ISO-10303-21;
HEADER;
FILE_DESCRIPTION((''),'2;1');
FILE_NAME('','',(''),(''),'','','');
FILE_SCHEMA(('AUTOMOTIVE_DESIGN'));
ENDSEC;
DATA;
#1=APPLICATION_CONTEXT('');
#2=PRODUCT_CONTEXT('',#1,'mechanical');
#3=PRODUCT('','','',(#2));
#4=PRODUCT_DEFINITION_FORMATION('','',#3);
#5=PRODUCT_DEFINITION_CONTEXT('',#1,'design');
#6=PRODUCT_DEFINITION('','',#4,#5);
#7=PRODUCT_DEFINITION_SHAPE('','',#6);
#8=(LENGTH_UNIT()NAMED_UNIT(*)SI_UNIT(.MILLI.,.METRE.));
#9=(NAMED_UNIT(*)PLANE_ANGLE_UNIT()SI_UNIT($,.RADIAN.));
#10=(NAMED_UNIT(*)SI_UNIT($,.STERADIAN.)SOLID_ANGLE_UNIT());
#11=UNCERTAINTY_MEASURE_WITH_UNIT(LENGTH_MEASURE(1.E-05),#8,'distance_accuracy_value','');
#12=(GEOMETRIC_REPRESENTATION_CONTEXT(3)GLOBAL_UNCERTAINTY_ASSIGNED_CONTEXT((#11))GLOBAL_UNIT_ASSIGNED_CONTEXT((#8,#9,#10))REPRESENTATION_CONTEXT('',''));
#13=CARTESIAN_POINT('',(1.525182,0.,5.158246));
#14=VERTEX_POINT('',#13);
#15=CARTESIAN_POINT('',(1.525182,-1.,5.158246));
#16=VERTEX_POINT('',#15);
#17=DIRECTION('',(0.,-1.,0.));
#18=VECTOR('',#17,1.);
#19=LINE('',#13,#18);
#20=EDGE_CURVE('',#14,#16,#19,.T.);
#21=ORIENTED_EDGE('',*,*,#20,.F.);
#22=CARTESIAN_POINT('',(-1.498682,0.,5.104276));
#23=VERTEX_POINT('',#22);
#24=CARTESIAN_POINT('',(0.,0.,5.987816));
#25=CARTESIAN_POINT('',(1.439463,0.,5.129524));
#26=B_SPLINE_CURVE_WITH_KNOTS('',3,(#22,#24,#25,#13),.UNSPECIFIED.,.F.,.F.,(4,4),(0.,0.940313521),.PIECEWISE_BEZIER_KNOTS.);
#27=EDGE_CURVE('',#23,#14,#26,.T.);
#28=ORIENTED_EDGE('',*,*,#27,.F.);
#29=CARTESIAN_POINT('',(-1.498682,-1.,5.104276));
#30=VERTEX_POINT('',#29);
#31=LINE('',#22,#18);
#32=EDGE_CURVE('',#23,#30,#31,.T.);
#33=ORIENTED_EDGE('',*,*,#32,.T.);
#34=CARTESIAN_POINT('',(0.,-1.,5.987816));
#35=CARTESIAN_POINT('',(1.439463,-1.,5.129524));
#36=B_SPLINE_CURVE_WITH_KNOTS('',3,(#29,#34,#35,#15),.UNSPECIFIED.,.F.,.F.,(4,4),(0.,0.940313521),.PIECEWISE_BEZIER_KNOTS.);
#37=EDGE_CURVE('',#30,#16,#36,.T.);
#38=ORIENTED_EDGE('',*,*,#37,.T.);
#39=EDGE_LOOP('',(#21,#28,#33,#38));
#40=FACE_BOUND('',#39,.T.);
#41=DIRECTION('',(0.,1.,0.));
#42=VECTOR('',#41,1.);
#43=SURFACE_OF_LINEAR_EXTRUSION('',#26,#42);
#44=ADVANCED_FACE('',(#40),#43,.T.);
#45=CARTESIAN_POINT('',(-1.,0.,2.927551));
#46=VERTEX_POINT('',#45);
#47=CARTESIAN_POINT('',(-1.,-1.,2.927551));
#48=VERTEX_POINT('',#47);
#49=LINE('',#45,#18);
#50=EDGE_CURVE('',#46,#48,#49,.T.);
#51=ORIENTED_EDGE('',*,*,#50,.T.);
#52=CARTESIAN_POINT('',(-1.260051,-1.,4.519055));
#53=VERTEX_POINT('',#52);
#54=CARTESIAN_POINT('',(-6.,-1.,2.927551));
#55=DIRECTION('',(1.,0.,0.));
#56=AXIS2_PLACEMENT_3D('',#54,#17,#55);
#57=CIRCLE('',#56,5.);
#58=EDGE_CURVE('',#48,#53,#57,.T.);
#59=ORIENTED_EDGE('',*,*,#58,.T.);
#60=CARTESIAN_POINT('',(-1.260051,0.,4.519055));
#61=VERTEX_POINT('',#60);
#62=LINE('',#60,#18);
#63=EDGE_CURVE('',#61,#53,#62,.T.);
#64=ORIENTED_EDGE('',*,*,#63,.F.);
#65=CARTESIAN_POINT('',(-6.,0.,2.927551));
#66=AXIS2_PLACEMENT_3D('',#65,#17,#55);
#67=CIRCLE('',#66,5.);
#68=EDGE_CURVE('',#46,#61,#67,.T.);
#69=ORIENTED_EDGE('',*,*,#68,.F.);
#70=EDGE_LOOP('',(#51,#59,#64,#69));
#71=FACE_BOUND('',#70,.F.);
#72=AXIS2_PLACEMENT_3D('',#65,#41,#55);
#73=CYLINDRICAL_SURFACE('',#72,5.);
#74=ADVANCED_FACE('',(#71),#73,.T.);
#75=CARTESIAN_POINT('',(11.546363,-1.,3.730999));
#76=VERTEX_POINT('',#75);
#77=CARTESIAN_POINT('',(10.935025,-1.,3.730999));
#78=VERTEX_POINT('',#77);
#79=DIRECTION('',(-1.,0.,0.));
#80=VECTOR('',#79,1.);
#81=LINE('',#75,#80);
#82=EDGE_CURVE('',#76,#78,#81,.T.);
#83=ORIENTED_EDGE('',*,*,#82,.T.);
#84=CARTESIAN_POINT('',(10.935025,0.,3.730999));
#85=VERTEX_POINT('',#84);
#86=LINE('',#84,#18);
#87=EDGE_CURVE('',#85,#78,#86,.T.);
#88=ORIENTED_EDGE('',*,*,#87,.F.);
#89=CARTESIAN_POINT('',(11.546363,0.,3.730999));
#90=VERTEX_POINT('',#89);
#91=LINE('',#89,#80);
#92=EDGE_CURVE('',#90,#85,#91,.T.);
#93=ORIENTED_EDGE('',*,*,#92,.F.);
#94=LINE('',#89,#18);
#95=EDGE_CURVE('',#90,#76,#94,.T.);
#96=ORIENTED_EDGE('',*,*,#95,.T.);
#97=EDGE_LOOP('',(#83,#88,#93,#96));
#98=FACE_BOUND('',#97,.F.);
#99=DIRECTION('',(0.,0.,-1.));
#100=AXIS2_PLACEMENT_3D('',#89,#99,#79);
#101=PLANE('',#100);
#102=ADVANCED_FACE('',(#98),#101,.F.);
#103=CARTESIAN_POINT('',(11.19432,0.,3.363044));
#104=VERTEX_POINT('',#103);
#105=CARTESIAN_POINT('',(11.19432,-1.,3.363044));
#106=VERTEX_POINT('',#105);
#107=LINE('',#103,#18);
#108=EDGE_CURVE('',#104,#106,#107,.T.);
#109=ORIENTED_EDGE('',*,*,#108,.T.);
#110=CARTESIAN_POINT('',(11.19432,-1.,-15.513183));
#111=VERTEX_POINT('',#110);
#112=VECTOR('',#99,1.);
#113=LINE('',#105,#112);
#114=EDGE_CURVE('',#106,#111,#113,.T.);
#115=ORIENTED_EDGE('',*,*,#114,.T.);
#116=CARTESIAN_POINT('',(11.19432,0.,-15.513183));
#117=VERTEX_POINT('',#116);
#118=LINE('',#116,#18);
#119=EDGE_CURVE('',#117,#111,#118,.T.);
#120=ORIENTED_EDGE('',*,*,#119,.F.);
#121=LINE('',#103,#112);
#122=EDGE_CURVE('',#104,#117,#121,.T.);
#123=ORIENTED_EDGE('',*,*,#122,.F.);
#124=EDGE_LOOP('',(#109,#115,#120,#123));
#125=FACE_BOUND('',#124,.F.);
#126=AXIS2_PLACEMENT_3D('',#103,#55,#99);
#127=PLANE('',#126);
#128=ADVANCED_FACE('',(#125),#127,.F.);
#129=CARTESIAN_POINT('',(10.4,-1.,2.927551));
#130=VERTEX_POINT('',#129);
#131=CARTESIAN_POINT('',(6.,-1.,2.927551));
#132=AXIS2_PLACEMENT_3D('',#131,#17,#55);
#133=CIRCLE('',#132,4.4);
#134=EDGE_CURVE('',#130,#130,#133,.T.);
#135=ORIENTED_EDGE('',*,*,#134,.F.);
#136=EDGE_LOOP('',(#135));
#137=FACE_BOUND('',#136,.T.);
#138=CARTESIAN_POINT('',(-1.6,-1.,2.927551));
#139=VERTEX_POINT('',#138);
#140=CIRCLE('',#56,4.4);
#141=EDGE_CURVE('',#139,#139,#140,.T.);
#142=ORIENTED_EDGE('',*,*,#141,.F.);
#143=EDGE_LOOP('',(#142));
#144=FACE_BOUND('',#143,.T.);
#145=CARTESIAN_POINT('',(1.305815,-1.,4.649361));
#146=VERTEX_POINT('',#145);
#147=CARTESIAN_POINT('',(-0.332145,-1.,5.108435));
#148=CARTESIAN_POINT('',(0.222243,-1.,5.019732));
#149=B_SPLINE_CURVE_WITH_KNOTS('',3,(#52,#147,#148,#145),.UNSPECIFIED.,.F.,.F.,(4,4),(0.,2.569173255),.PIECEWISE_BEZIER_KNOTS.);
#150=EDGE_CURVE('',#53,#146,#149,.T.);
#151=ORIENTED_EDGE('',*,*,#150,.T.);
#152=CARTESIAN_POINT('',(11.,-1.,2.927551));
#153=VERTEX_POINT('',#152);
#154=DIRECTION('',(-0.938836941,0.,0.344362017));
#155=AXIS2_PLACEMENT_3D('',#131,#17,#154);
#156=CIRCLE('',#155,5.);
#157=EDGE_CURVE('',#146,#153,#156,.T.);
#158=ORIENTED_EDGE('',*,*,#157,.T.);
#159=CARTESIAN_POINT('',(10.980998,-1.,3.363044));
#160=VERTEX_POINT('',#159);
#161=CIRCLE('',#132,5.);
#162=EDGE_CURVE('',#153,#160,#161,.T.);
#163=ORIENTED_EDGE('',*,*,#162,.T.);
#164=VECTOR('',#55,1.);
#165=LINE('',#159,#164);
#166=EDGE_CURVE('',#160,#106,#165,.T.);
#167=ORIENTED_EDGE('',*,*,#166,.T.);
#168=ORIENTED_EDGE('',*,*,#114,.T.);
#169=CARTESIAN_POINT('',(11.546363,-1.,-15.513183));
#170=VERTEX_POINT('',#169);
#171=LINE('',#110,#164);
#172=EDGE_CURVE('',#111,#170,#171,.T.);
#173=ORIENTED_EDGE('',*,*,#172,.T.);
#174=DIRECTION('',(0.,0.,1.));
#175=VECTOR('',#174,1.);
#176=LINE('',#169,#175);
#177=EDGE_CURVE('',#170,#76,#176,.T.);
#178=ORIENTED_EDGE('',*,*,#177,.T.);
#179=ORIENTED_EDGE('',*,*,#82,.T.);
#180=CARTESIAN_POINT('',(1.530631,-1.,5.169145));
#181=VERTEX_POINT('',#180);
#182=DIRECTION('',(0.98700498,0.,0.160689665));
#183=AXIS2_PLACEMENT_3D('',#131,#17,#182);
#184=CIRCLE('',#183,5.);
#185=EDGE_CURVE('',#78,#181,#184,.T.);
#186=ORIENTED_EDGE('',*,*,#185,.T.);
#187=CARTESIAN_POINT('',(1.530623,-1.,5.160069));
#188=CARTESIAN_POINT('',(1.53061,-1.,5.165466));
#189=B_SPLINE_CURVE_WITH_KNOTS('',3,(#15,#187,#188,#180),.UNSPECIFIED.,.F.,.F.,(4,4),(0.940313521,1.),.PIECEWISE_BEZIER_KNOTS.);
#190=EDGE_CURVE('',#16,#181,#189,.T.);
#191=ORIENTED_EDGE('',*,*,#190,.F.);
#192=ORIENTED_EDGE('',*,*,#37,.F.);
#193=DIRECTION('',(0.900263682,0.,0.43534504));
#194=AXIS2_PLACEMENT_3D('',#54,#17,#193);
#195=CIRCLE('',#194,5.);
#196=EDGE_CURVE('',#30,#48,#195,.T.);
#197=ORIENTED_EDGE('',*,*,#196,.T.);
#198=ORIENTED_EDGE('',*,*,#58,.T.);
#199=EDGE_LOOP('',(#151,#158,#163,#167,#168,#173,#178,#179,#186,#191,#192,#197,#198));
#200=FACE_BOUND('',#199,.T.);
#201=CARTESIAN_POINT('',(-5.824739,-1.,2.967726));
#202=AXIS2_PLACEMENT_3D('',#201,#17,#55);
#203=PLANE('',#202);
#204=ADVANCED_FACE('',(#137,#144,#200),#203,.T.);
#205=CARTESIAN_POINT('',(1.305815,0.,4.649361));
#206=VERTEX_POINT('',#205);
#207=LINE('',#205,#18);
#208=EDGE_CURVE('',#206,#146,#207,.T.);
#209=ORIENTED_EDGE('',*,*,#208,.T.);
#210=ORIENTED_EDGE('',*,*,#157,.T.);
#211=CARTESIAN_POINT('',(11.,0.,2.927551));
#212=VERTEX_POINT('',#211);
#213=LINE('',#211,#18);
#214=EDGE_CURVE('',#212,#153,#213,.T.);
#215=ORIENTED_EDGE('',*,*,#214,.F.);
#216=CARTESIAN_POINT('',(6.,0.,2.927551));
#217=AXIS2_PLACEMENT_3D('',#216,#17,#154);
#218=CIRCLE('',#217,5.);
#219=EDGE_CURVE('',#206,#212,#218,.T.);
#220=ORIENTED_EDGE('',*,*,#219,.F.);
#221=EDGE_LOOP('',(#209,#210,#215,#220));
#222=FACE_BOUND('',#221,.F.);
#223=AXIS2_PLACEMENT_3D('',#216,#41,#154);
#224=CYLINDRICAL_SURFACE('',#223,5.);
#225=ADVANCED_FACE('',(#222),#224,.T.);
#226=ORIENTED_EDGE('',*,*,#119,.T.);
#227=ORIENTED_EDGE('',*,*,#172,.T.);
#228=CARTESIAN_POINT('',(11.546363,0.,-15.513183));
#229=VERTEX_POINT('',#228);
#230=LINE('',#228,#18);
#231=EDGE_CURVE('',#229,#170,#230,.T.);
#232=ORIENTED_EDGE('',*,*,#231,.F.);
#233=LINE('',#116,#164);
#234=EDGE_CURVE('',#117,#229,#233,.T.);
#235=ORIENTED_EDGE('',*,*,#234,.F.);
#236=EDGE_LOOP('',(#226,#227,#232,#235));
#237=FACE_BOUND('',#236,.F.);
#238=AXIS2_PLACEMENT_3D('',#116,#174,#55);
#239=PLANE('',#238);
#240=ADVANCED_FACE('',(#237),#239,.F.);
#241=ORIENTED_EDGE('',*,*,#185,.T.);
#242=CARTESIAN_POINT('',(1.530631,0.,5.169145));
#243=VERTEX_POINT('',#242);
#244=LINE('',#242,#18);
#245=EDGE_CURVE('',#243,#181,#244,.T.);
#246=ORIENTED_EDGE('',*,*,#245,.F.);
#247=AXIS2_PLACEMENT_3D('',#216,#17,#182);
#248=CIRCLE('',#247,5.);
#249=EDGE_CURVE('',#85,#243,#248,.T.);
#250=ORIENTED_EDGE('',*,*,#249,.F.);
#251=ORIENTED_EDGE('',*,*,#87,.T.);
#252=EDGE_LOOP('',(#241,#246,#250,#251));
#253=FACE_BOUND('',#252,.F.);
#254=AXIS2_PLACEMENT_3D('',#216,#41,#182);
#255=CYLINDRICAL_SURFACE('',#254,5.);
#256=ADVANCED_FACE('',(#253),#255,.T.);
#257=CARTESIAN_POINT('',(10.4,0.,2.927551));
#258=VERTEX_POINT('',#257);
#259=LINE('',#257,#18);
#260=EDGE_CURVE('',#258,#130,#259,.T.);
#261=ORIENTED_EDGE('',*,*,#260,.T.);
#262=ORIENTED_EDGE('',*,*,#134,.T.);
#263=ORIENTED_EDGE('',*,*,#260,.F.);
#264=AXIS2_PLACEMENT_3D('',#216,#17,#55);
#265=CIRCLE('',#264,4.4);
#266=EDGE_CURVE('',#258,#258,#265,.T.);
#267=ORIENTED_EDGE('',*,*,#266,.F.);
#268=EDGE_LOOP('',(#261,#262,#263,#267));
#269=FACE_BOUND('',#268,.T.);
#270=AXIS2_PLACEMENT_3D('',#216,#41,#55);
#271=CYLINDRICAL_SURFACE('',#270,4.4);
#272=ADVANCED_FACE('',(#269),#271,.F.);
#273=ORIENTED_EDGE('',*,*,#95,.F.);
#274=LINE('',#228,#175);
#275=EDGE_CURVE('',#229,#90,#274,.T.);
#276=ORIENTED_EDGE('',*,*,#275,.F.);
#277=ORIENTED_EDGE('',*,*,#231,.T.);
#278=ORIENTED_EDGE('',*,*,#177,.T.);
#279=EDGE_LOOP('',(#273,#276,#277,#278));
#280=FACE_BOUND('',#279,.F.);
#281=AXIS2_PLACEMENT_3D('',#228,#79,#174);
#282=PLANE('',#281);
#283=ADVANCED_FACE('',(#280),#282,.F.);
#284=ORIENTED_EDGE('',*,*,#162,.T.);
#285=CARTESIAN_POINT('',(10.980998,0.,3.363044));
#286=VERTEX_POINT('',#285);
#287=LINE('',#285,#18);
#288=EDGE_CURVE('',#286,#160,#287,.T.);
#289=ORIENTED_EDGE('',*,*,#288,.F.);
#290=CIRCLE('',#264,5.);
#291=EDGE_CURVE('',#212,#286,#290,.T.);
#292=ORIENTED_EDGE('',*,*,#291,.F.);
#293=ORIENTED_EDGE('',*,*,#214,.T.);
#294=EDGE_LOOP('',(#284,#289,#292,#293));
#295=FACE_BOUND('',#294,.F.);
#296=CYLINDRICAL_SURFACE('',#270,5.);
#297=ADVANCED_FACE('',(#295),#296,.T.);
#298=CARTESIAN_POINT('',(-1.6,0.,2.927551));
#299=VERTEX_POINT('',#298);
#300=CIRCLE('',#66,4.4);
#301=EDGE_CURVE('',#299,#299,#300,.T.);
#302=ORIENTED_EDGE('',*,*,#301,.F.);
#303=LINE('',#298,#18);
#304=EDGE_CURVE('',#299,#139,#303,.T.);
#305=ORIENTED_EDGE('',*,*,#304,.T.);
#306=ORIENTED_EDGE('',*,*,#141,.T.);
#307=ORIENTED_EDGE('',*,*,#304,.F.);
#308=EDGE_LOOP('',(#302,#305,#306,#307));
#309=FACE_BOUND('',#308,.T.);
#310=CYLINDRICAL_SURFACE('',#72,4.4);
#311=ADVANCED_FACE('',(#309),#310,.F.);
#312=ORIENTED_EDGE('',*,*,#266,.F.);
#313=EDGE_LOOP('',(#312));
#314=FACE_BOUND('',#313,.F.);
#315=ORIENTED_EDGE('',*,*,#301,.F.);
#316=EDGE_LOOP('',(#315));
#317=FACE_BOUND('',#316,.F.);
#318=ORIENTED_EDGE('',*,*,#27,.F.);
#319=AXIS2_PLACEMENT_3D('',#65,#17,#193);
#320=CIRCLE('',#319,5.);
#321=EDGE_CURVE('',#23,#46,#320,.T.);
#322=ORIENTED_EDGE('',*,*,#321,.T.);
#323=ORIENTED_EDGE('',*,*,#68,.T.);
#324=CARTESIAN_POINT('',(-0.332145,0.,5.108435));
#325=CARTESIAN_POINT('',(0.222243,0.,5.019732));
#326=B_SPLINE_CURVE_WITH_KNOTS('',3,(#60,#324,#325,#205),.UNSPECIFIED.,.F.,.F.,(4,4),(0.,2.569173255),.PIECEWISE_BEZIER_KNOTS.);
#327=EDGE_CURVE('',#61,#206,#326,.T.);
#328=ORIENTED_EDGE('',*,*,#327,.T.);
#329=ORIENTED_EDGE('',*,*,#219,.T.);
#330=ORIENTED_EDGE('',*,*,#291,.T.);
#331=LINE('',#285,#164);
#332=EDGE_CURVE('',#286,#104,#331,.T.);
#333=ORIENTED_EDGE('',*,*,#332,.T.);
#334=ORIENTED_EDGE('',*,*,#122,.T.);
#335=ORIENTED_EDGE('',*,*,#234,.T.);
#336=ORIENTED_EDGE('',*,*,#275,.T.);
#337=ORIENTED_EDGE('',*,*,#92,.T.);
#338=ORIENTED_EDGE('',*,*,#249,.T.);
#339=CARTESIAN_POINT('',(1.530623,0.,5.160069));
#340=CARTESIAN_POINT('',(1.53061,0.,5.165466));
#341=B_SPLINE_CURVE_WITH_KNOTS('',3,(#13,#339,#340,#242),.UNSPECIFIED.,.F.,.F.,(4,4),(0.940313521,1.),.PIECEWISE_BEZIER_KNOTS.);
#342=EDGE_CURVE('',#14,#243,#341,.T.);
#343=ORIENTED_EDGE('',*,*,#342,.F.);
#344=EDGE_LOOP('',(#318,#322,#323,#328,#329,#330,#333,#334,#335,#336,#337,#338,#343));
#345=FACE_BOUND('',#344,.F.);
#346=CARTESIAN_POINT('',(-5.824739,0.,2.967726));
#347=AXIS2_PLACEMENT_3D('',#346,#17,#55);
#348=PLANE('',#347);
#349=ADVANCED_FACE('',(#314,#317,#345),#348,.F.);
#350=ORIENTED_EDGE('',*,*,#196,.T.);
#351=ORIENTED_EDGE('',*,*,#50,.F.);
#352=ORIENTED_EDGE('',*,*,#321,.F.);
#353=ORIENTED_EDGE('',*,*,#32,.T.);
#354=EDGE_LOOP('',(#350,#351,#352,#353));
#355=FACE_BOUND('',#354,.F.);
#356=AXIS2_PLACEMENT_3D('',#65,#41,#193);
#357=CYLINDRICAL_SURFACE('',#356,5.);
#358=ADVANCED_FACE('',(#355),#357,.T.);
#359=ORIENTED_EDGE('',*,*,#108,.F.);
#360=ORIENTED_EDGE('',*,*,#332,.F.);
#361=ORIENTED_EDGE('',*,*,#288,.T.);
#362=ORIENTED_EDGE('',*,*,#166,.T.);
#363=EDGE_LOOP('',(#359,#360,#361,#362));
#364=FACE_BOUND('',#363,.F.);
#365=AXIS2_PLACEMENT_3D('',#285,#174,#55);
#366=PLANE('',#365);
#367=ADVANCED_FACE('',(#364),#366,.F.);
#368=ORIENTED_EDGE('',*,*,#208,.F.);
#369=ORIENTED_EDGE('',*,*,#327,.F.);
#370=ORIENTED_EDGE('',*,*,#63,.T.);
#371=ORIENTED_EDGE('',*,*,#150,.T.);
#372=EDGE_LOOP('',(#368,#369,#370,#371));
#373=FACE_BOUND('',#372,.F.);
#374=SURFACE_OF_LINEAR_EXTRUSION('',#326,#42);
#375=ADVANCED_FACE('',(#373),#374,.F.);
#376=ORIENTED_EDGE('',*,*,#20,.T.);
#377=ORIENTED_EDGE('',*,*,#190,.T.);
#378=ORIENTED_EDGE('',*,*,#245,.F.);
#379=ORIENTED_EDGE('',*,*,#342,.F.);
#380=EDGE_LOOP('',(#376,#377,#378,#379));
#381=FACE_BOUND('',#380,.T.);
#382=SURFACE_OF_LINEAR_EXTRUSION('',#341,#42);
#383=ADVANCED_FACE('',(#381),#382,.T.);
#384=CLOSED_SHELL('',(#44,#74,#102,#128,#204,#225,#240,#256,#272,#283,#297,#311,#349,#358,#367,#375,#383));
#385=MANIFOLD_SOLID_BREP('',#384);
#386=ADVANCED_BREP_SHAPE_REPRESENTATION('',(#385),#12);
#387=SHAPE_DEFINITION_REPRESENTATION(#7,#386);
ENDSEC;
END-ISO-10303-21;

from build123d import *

# Parameters (mm, degrees)
F0_R     = 4.4
F1_DEPTH = 1


with BuildPart() as f1:
    # F0 (on Front) → F1 (new body)
    with BuildSketch(Plane.XZ):
        with BuildLine():
            ThreePointArc((-1.4986815922, 5.1042757445), (-10.8737353251, 1.8109915545), (-1, 2.9275505456))
            ThreePointArc((-1, 2.9275505456), (-1.0654410934, 3.733855945), (-1.2600513589, 4.5190551417))
            ThreePointArc((-1.2600513589, 4.5190551417), (-1.3701106972, 4.81543959), (-1.4986815922, 5.1042757445))
        make_face()
        with Locations((-6, 2.9275505456)):
            Circle(F0_R, mode=Mode.SUBTRACT)
        with BuildLine():
            ThreePointArc((-1.4986815922, 5.1042757445), (-1.3701106972, 4.81543959), (-1.2600513589, 4.5190551417))
            add(Edge.make_bspline(
                [(-1.2600513589, 4.5190551417), (-0.3321453987, 5.1084347069), (0.2222434123, 5.0197322853), (1.305815297, 4.6493606322)],
                knots=[0, 0, 0, 0, 2.5691732555, 2.5691732555, 2.5691732555, 2.5691732555], degree=3))
            ThreePointArc((1.305815297, 4.6493606322), (1.408443121, 4.9068447194), (1.525181814, 5.1582459982))
            add(Edge.make_bspline(
                [(-1.4986815922, 5.1042757445), (0, 5.9878164902), (1.4394625627, 5.1295237069), (1.525181814, 5.1582459982)],
                knots=[0, 0, 0, 0, 0.9403135209, 0.9403135209, 0.9403135209, 0.9403135209], degree=3))
        make_face()
        with BuildLine():
            ThreePointArc((1.525181814, 5.1582459982), (1.408443121, 4.9068447194), (1.305815297, 4.6493606322))
            ThreePointArc((1.305815297, 4.6493606322), (5.1256212248, -1.9954019991), (11, 2.9275505456))
            ThreePointArc((11, 2.9275505456), (10.9952473554, 3.1455043436), (10.9809984568, 3.3630437989))
            ThreePointArc((10.9809984568, 3.3630437989), (10.9614239437, 3.5474476752), (10.9350249024, 3.7309988718))
            ThreePointArc((10.9350249024, 3.7309988718), (6.7558272917, 7.8700929182), (1.5306314581, 5.1691448079))
            add(Edge.make_bspline(
                [(1.525181814, 5.1582459982), (1.5306228506, 5.160069148), (1.5306095387, 5.165466158), (1.5306314581, 5.1691448079)],
                knots=[0.9403135209, 0.9403135209, 0.9403135209, 0.9403135209, 1, 1, 1, 1], degree=3))
        make_face()
        with Locations((6, 2.9275505456)):
            Circle(F0_R, mode=Mode.SUBTRACT)
        with BuildLine():
            ThreePointArc((10.9350249024, 3.7309988718), (10.9614239437, 3.5474476752), (10.9809984568, 3.3630437989))
            Line((10.9809984568, 3.3630437989), (11.1943203956, 3.3630437989))
            Line((11.1943203956, 3.3630437989), (11.1943203956, -15.5131826177))
            Line((11.1943203956, -15.5131826177), (11.5463633525, -15.5131826177))
            Line((11.5463633525, -15.5131826177), (11.5463633525, 3.7309988718))
            Line((11.5463633525, 3.7309988718), (10.9350249024, 3.7309988718))
        make_face()
    extrude(amount=F1_DEPTH)


solid = f1.part
